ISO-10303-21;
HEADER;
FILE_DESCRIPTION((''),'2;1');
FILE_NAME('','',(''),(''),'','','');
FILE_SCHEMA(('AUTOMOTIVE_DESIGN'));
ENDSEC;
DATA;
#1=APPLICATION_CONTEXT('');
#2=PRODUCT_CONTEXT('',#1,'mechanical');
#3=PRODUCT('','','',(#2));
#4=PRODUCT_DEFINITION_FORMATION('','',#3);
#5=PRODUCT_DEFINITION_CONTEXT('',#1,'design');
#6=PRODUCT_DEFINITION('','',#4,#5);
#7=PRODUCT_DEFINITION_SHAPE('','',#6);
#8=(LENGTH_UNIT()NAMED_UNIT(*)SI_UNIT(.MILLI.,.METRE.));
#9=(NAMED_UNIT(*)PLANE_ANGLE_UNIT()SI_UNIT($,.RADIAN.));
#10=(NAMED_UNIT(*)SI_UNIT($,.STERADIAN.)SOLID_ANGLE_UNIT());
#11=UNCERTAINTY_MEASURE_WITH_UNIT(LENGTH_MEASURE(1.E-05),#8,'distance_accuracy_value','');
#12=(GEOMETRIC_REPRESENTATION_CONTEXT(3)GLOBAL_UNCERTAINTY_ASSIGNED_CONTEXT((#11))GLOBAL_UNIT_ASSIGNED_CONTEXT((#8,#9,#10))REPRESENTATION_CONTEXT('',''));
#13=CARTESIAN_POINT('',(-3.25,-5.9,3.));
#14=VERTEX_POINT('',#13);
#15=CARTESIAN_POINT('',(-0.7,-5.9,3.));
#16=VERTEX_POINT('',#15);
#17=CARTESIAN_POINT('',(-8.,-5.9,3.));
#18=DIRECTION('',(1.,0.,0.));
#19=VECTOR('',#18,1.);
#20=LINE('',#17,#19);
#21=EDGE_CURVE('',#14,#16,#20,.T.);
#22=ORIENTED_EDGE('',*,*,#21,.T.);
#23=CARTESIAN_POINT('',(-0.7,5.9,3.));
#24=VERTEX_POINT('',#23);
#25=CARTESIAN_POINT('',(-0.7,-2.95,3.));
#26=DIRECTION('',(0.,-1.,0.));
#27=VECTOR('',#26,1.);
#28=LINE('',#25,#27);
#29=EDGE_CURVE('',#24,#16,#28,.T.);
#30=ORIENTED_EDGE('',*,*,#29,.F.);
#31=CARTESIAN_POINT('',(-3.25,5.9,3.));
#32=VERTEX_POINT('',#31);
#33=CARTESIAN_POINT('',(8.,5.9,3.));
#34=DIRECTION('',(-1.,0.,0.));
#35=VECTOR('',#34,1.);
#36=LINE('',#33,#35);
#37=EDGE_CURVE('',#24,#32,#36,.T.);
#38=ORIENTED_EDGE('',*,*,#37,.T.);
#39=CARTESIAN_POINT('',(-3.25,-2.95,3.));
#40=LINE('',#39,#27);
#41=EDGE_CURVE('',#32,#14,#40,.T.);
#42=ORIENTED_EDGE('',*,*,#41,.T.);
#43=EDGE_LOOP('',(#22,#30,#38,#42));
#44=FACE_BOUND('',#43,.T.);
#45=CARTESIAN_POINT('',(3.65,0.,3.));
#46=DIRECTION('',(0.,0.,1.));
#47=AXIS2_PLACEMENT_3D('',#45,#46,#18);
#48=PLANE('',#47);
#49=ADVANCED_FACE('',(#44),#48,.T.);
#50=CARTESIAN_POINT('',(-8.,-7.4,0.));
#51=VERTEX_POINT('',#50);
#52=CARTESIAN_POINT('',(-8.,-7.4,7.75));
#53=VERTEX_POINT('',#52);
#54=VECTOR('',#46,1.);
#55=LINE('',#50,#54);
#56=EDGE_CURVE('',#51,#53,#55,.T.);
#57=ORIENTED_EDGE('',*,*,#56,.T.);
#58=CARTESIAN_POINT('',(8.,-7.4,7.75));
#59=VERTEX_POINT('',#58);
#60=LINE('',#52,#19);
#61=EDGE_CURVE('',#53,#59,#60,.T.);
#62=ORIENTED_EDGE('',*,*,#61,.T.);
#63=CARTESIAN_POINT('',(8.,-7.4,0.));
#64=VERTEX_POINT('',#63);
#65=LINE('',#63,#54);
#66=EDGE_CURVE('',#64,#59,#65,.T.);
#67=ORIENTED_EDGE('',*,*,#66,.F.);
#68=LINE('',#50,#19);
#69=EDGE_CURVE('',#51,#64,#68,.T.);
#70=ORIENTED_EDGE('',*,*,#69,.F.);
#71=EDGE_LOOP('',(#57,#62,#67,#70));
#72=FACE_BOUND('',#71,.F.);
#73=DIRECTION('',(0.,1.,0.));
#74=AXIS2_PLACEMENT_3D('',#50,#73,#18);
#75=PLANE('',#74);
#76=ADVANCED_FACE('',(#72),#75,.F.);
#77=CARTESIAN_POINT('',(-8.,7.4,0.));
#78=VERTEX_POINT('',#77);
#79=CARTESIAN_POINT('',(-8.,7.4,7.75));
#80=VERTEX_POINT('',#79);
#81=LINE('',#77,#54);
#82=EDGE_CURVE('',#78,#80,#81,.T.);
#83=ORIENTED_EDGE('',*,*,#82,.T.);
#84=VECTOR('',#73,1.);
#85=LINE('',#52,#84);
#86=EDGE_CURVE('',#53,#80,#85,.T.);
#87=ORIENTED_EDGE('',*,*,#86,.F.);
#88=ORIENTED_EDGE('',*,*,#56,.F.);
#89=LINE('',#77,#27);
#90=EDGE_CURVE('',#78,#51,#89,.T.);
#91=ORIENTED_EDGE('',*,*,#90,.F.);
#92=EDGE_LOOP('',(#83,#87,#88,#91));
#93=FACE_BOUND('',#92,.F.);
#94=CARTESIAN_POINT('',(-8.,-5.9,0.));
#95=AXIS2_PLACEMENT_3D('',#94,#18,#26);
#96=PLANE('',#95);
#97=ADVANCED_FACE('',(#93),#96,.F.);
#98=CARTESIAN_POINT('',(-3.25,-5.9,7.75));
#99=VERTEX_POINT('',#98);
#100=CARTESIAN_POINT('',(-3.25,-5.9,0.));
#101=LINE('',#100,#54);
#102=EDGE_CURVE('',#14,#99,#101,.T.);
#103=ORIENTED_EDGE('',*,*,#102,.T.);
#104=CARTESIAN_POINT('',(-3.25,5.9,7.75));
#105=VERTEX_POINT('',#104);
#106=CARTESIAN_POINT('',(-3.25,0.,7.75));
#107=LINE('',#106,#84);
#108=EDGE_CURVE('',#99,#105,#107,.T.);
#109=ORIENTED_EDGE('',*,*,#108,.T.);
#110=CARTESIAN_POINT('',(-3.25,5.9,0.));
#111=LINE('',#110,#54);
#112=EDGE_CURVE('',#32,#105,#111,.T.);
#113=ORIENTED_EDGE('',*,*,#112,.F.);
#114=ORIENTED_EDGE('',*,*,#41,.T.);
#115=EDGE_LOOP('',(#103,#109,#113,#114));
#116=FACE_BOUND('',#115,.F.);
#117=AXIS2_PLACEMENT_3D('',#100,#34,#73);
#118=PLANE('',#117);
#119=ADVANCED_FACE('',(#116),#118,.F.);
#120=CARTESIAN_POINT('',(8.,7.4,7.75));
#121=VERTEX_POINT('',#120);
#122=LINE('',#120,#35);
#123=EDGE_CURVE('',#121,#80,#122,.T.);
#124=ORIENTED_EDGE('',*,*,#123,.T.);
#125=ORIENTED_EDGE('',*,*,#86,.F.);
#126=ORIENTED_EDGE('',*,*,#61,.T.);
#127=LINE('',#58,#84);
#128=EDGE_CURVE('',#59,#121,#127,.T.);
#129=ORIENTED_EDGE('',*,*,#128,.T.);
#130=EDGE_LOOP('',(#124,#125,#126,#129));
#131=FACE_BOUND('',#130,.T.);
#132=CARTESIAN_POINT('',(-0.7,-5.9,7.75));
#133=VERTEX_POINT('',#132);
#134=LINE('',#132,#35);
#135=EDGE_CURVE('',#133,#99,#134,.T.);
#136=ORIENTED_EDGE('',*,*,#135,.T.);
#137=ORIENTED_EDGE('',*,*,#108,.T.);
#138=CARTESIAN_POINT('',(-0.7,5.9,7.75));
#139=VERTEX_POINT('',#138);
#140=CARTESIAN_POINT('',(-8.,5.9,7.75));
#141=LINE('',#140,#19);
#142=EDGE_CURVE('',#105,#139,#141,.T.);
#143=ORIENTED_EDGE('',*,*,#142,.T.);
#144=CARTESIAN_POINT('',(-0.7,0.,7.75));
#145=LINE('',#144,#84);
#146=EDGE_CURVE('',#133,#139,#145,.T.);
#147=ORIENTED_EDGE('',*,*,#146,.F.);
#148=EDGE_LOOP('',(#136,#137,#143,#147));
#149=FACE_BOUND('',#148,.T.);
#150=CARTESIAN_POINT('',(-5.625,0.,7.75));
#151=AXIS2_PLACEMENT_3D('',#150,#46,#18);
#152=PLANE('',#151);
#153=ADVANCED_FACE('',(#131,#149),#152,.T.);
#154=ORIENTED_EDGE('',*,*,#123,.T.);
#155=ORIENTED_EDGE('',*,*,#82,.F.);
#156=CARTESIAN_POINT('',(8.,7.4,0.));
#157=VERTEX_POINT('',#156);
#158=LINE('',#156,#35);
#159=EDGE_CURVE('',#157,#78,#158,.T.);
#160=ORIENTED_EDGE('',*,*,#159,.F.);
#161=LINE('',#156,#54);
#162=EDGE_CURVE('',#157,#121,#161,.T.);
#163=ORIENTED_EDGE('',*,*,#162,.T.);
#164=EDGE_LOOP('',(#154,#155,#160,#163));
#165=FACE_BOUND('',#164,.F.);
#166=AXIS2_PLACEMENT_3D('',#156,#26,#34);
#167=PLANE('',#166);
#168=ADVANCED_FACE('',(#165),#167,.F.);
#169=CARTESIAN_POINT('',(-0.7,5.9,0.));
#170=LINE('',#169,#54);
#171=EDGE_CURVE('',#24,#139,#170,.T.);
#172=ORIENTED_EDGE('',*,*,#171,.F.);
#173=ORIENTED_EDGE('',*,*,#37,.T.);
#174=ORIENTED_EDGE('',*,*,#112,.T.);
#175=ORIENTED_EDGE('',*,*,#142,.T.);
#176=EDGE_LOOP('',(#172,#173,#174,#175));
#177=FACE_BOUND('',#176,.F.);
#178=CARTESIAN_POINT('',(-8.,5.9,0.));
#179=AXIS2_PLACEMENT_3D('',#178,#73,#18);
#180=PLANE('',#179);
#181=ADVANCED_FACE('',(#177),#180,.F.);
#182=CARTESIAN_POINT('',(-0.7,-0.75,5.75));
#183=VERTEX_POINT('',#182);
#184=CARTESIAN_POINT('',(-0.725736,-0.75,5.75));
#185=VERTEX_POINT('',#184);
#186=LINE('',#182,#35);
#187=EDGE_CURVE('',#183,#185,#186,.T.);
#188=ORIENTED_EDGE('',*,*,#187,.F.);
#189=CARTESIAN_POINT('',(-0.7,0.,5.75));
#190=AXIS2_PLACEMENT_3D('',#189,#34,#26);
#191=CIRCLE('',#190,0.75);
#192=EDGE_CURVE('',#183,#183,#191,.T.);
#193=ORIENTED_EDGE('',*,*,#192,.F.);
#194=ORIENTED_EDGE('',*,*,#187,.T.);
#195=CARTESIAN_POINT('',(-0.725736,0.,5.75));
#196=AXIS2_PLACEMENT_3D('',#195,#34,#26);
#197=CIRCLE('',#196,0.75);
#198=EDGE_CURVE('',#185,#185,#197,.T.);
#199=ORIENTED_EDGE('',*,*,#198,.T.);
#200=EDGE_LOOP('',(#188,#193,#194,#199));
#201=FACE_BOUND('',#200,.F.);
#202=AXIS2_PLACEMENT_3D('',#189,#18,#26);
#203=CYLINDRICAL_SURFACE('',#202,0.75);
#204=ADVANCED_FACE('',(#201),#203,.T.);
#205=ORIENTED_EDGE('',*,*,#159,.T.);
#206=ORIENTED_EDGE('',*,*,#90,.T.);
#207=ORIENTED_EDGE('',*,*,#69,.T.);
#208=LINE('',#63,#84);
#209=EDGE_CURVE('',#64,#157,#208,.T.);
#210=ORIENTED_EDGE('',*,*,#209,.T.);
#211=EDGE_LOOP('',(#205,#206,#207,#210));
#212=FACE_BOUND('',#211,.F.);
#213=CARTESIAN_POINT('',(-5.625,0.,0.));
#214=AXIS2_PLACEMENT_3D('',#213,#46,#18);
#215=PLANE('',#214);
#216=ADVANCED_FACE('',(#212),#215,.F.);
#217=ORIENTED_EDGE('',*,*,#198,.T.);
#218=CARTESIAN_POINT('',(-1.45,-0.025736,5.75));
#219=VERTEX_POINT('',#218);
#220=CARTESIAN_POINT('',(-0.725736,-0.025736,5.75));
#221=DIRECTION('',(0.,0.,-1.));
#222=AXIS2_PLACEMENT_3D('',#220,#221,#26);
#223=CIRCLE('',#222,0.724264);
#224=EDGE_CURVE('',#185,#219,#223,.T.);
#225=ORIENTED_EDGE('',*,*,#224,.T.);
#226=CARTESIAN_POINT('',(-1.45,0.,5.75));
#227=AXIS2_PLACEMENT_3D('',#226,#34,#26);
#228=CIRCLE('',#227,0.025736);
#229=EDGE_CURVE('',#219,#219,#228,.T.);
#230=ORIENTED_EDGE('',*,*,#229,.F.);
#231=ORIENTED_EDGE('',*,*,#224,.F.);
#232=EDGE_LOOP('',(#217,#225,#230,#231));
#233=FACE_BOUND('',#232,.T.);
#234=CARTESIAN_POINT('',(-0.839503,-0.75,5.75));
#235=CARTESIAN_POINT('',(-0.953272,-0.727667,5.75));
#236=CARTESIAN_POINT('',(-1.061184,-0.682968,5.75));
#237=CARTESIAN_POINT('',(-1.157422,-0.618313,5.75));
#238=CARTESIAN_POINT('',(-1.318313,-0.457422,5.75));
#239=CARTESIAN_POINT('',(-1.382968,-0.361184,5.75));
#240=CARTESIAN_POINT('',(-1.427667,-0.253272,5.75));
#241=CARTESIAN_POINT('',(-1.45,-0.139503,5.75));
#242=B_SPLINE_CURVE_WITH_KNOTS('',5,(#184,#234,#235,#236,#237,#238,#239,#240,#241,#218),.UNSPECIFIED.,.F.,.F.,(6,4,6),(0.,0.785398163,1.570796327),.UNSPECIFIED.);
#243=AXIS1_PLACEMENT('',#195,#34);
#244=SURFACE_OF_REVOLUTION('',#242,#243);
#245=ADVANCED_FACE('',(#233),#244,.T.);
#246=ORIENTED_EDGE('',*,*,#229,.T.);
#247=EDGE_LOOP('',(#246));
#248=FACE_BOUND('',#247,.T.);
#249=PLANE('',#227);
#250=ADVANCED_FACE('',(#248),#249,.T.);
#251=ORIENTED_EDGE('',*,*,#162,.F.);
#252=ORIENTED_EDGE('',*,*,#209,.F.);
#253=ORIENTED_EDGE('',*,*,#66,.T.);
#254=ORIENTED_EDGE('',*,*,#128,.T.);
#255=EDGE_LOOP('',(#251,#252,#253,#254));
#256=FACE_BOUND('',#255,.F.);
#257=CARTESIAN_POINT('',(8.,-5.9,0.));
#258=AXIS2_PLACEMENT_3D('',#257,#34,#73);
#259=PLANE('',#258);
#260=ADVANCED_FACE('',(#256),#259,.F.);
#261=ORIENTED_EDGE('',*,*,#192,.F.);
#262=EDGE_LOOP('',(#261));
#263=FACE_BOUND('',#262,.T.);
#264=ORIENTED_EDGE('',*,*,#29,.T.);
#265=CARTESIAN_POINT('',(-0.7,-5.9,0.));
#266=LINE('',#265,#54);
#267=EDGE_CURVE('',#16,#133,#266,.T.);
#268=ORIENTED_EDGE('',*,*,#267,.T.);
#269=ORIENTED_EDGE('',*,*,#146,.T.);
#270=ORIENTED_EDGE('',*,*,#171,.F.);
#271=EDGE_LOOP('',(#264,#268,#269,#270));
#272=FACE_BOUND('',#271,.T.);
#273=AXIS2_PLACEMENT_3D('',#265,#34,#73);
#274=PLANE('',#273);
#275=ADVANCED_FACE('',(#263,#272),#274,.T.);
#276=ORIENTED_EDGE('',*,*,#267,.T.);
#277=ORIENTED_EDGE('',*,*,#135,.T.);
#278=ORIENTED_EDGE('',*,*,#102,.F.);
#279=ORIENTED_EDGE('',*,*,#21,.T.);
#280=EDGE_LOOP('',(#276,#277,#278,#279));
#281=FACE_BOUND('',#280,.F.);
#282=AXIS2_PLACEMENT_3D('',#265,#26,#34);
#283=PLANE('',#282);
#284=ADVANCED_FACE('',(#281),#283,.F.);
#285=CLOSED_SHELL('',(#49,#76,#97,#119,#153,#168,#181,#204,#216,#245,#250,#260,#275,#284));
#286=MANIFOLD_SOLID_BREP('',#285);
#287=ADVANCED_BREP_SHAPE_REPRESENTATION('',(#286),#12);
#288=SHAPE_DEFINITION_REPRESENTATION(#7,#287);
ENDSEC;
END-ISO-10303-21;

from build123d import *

# Parameters (mm, degrees)
F3_W     = 8.7
F3_H     = 11.8
F3_W_2   = 2.55
F3_W_3   = 4.75
F4_DEPTH = 3
F5_DEPTH = 7.75
F6_R     = 0.75
F7_DEPTH = 0.75
F8_R     = 0.7242640687
F9_DEPTH = 7.75


# Not quite as in the source:
# - a feature names something its author has since deleted; it is built from what else it names


with BuildPart() as f4:
    # F3 (on Top) → F4 (new body)
    with BuildSketch(Plane.XY):
        with Locations((3.65, 0)):
            Rectangle(F3_W, F3_H)
        with Locations((-1.975, 0)):
            Rectangle(F3_W_2, F3_H)
        with Locations((-5.625, 0)):
            Rectangle(F3_W_3, F3_H)
    extrude(amount=F4_DEPTH)

    # F3 (on Top) → F5 (join)
    with BuildSketch(Plane.XY):
        with Locations((3.65, 0)):
            Rectangle(F3_W, F3_H)
        Polygon((8, -7.4), (8, -5.9), (-0.7, -5.9), (-3.25, -5.9), (-8, -5.9), (-8, -7.4), align=None)
        Polygon((-0.7, 5.9), (8, 5.9), (8, 7.4), (-8, 7.4), (-8, 5.9), (-3.25, 5.9), align=None)
    extrude(amount=F5_DEPTH)

    # F6 (on face) → F7 (join)
    with BuildSketch(Plane(origin=(-0.7, 0, 0), x_dir=(0, -1, 0), z_dir=(-1, 0, 0))):
        with Locations((0, 5.75)):
            Circle(F6_R)
    extrude(amount=F7_DEPTH)

    # F8
    f8_edges = [f4.edges().sort_by_distance(p)[0] for p in [
        (-1.45, 0.75, 5.75),
    ]]
    fillet(f8_edges, radius=F8_R)

    # F3 (on Top) → F9 (join)
    with BuildSketch(Plane.XY):
        with Locations((-5.625, 0)):
            Rectangle(F3_W_3, F3_H)
    extrude(amount=F9_DEPTH)


solid = f4.part
